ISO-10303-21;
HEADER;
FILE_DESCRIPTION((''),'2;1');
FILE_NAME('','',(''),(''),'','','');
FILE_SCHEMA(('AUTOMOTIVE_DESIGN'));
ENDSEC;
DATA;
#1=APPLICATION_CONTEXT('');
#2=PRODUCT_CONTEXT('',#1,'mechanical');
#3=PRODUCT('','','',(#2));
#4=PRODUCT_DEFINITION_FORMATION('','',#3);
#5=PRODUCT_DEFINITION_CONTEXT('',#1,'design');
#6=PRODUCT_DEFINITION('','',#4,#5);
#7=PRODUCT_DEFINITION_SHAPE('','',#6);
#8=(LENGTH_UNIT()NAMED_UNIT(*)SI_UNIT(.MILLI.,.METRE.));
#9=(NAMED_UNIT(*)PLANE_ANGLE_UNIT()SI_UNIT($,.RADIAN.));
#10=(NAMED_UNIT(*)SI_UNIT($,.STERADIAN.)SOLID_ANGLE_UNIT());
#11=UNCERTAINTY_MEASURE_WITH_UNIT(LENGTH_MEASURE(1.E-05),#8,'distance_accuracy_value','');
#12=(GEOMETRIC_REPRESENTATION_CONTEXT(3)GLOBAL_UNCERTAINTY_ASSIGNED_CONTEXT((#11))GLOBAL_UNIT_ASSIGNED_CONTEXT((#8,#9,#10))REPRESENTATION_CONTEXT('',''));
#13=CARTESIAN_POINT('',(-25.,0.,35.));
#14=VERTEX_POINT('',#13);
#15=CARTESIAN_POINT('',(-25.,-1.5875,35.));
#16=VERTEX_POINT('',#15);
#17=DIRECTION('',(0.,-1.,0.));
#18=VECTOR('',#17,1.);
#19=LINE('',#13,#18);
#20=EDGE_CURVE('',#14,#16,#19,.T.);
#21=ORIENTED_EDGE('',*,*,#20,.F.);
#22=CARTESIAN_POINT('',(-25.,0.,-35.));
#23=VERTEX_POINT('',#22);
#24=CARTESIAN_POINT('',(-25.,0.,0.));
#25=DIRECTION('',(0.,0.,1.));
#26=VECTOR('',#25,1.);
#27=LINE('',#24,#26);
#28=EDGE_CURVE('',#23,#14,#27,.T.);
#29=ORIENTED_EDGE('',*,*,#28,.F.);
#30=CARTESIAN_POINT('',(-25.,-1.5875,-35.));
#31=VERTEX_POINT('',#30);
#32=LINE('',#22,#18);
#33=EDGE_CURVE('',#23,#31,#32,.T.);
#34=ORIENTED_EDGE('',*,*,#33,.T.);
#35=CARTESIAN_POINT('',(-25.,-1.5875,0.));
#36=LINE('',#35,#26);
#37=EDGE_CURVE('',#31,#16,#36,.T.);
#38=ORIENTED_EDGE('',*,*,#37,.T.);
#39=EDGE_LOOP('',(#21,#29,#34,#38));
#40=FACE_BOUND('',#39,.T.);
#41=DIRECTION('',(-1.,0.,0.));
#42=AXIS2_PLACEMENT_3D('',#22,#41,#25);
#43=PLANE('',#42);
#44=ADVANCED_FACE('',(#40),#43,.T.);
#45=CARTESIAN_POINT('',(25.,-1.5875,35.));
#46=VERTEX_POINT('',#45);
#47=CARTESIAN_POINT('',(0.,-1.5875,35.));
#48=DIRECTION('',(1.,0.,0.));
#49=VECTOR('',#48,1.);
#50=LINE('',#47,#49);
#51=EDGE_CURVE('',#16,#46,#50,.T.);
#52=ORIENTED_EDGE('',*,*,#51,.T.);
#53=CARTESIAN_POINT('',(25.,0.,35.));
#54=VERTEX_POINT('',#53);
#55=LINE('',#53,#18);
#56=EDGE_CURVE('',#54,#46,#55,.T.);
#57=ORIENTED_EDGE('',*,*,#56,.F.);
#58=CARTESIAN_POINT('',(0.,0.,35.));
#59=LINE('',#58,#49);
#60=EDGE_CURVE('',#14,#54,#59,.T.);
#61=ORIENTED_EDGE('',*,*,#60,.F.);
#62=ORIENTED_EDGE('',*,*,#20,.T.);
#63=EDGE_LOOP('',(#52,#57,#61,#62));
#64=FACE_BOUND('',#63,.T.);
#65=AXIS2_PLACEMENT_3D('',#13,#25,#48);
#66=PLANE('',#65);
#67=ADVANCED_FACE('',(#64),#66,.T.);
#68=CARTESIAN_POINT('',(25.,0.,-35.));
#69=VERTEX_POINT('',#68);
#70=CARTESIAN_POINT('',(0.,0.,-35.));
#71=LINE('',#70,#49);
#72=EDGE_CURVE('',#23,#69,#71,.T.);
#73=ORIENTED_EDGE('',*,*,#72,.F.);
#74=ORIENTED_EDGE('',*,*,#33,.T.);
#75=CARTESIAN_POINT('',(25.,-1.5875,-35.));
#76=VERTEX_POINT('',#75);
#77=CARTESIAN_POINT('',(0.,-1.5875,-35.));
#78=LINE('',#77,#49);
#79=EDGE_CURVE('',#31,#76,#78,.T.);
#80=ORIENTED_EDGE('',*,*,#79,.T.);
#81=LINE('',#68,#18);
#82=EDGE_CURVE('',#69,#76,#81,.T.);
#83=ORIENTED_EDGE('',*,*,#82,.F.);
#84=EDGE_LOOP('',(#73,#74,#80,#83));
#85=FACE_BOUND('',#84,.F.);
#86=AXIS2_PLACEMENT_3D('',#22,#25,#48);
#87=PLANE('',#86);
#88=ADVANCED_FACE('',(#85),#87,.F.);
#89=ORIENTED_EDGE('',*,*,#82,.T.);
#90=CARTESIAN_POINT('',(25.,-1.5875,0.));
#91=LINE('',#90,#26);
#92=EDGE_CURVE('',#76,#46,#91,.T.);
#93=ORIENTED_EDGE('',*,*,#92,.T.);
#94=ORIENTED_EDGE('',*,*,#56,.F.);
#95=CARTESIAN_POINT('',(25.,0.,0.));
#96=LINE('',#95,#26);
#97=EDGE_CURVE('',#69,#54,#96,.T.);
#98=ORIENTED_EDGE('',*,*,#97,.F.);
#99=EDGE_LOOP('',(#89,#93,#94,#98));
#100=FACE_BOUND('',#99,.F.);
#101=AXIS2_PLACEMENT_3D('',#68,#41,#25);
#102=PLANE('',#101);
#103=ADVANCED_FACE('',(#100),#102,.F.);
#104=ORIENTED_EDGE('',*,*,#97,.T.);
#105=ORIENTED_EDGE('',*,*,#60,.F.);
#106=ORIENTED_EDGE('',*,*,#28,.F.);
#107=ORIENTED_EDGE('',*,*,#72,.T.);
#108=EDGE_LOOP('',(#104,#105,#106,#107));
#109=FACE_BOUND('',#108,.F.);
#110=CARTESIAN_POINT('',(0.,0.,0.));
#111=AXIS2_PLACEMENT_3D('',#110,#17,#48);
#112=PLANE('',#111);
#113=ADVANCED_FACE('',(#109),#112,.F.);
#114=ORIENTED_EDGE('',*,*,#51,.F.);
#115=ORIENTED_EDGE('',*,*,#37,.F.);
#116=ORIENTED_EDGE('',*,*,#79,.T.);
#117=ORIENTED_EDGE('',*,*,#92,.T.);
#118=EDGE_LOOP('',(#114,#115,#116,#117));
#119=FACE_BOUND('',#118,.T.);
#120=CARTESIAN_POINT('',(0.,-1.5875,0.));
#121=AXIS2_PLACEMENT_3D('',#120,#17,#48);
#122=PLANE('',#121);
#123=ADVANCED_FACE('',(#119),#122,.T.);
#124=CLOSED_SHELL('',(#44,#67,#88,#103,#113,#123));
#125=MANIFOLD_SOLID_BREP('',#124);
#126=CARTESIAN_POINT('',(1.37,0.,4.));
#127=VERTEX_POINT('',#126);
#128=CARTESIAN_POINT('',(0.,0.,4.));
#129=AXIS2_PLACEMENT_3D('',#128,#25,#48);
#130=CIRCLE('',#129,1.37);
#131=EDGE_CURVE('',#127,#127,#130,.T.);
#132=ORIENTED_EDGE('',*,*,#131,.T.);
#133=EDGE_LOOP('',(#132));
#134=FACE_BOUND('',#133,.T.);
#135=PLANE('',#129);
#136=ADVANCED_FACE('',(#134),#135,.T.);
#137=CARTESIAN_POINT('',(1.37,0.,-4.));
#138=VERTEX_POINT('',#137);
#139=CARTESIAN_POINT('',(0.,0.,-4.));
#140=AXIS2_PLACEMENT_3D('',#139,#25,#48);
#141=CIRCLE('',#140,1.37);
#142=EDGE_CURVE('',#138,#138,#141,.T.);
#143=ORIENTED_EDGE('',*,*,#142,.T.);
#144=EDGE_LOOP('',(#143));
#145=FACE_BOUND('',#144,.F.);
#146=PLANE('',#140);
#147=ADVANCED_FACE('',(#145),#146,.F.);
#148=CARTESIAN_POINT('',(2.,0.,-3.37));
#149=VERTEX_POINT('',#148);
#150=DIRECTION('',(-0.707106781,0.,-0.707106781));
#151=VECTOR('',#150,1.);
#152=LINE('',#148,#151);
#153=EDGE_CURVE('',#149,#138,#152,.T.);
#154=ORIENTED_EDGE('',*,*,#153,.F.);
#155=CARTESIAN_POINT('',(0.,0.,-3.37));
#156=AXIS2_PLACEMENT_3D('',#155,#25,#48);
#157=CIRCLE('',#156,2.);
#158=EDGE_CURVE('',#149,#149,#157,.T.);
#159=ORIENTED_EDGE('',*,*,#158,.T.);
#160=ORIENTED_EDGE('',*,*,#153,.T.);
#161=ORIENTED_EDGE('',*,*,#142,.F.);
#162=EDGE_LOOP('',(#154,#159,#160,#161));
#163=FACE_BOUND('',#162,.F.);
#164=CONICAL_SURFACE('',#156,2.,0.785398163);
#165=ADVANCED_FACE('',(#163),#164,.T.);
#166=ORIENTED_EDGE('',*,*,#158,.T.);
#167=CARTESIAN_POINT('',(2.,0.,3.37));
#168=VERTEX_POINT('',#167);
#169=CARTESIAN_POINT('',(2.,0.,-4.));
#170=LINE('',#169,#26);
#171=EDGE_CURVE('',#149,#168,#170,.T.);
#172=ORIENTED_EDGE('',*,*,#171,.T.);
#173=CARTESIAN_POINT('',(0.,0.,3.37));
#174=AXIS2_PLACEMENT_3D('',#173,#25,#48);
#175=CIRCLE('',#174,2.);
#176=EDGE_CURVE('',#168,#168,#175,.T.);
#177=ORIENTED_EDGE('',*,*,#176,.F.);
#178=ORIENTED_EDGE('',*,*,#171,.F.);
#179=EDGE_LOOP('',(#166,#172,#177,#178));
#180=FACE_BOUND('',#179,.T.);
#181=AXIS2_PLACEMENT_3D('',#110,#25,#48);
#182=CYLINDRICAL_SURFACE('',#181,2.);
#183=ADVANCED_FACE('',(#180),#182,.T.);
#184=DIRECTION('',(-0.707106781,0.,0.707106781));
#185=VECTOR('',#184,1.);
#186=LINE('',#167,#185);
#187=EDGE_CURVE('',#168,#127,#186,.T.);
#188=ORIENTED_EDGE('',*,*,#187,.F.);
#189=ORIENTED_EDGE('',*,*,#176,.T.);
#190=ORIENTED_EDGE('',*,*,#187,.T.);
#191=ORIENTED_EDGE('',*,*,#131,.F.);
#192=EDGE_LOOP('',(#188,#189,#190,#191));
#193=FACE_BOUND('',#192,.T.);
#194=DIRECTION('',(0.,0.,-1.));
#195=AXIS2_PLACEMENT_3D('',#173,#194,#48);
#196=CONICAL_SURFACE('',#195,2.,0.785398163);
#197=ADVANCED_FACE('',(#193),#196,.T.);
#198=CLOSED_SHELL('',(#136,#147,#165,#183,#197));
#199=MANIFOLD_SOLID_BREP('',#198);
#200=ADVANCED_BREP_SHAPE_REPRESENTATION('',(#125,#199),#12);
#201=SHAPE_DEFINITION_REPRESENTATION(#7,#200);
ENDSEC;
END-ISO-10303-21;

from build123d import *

# Parameters (mm, degrees)
F0_R     = 2
F1_DEPTH = 4
F2_SIZE  = 0.63
F3_W     = 50
F3_H     = 70
F4_DEPTH = 1.5875


# Not quite as in the source:
# - a length typed as a fraction of an inch, garbled in the dataset ("3 / 203.2 mm" for 3/8 in), is restored


with BuildPart() as f1:
    # F0 (on Top) → F1 (new body, symmetric)
    with BuildSketch(Plane.XY):
        Circle(F0_R)
    extrude(amount=F1_DEPTH, both=True)

    # F2
    f2_edges = [f1.edges().sort_by_distance(p)[0] for p in [
        (-2, 0, 4),
        (-2, 0, -4),
    ]]
    chamfer(f2_edges, length=F2_SIZE)


with BuildPart() as f4:
    # F3 (on Front) → F4 (new body)
    with BuildSketch(Plane.XZ):
        Rectangle(F3_W, F3_H)
    extrude(amount=F4_DEPTH)


solid = Compound([f1.part, f4.part])
